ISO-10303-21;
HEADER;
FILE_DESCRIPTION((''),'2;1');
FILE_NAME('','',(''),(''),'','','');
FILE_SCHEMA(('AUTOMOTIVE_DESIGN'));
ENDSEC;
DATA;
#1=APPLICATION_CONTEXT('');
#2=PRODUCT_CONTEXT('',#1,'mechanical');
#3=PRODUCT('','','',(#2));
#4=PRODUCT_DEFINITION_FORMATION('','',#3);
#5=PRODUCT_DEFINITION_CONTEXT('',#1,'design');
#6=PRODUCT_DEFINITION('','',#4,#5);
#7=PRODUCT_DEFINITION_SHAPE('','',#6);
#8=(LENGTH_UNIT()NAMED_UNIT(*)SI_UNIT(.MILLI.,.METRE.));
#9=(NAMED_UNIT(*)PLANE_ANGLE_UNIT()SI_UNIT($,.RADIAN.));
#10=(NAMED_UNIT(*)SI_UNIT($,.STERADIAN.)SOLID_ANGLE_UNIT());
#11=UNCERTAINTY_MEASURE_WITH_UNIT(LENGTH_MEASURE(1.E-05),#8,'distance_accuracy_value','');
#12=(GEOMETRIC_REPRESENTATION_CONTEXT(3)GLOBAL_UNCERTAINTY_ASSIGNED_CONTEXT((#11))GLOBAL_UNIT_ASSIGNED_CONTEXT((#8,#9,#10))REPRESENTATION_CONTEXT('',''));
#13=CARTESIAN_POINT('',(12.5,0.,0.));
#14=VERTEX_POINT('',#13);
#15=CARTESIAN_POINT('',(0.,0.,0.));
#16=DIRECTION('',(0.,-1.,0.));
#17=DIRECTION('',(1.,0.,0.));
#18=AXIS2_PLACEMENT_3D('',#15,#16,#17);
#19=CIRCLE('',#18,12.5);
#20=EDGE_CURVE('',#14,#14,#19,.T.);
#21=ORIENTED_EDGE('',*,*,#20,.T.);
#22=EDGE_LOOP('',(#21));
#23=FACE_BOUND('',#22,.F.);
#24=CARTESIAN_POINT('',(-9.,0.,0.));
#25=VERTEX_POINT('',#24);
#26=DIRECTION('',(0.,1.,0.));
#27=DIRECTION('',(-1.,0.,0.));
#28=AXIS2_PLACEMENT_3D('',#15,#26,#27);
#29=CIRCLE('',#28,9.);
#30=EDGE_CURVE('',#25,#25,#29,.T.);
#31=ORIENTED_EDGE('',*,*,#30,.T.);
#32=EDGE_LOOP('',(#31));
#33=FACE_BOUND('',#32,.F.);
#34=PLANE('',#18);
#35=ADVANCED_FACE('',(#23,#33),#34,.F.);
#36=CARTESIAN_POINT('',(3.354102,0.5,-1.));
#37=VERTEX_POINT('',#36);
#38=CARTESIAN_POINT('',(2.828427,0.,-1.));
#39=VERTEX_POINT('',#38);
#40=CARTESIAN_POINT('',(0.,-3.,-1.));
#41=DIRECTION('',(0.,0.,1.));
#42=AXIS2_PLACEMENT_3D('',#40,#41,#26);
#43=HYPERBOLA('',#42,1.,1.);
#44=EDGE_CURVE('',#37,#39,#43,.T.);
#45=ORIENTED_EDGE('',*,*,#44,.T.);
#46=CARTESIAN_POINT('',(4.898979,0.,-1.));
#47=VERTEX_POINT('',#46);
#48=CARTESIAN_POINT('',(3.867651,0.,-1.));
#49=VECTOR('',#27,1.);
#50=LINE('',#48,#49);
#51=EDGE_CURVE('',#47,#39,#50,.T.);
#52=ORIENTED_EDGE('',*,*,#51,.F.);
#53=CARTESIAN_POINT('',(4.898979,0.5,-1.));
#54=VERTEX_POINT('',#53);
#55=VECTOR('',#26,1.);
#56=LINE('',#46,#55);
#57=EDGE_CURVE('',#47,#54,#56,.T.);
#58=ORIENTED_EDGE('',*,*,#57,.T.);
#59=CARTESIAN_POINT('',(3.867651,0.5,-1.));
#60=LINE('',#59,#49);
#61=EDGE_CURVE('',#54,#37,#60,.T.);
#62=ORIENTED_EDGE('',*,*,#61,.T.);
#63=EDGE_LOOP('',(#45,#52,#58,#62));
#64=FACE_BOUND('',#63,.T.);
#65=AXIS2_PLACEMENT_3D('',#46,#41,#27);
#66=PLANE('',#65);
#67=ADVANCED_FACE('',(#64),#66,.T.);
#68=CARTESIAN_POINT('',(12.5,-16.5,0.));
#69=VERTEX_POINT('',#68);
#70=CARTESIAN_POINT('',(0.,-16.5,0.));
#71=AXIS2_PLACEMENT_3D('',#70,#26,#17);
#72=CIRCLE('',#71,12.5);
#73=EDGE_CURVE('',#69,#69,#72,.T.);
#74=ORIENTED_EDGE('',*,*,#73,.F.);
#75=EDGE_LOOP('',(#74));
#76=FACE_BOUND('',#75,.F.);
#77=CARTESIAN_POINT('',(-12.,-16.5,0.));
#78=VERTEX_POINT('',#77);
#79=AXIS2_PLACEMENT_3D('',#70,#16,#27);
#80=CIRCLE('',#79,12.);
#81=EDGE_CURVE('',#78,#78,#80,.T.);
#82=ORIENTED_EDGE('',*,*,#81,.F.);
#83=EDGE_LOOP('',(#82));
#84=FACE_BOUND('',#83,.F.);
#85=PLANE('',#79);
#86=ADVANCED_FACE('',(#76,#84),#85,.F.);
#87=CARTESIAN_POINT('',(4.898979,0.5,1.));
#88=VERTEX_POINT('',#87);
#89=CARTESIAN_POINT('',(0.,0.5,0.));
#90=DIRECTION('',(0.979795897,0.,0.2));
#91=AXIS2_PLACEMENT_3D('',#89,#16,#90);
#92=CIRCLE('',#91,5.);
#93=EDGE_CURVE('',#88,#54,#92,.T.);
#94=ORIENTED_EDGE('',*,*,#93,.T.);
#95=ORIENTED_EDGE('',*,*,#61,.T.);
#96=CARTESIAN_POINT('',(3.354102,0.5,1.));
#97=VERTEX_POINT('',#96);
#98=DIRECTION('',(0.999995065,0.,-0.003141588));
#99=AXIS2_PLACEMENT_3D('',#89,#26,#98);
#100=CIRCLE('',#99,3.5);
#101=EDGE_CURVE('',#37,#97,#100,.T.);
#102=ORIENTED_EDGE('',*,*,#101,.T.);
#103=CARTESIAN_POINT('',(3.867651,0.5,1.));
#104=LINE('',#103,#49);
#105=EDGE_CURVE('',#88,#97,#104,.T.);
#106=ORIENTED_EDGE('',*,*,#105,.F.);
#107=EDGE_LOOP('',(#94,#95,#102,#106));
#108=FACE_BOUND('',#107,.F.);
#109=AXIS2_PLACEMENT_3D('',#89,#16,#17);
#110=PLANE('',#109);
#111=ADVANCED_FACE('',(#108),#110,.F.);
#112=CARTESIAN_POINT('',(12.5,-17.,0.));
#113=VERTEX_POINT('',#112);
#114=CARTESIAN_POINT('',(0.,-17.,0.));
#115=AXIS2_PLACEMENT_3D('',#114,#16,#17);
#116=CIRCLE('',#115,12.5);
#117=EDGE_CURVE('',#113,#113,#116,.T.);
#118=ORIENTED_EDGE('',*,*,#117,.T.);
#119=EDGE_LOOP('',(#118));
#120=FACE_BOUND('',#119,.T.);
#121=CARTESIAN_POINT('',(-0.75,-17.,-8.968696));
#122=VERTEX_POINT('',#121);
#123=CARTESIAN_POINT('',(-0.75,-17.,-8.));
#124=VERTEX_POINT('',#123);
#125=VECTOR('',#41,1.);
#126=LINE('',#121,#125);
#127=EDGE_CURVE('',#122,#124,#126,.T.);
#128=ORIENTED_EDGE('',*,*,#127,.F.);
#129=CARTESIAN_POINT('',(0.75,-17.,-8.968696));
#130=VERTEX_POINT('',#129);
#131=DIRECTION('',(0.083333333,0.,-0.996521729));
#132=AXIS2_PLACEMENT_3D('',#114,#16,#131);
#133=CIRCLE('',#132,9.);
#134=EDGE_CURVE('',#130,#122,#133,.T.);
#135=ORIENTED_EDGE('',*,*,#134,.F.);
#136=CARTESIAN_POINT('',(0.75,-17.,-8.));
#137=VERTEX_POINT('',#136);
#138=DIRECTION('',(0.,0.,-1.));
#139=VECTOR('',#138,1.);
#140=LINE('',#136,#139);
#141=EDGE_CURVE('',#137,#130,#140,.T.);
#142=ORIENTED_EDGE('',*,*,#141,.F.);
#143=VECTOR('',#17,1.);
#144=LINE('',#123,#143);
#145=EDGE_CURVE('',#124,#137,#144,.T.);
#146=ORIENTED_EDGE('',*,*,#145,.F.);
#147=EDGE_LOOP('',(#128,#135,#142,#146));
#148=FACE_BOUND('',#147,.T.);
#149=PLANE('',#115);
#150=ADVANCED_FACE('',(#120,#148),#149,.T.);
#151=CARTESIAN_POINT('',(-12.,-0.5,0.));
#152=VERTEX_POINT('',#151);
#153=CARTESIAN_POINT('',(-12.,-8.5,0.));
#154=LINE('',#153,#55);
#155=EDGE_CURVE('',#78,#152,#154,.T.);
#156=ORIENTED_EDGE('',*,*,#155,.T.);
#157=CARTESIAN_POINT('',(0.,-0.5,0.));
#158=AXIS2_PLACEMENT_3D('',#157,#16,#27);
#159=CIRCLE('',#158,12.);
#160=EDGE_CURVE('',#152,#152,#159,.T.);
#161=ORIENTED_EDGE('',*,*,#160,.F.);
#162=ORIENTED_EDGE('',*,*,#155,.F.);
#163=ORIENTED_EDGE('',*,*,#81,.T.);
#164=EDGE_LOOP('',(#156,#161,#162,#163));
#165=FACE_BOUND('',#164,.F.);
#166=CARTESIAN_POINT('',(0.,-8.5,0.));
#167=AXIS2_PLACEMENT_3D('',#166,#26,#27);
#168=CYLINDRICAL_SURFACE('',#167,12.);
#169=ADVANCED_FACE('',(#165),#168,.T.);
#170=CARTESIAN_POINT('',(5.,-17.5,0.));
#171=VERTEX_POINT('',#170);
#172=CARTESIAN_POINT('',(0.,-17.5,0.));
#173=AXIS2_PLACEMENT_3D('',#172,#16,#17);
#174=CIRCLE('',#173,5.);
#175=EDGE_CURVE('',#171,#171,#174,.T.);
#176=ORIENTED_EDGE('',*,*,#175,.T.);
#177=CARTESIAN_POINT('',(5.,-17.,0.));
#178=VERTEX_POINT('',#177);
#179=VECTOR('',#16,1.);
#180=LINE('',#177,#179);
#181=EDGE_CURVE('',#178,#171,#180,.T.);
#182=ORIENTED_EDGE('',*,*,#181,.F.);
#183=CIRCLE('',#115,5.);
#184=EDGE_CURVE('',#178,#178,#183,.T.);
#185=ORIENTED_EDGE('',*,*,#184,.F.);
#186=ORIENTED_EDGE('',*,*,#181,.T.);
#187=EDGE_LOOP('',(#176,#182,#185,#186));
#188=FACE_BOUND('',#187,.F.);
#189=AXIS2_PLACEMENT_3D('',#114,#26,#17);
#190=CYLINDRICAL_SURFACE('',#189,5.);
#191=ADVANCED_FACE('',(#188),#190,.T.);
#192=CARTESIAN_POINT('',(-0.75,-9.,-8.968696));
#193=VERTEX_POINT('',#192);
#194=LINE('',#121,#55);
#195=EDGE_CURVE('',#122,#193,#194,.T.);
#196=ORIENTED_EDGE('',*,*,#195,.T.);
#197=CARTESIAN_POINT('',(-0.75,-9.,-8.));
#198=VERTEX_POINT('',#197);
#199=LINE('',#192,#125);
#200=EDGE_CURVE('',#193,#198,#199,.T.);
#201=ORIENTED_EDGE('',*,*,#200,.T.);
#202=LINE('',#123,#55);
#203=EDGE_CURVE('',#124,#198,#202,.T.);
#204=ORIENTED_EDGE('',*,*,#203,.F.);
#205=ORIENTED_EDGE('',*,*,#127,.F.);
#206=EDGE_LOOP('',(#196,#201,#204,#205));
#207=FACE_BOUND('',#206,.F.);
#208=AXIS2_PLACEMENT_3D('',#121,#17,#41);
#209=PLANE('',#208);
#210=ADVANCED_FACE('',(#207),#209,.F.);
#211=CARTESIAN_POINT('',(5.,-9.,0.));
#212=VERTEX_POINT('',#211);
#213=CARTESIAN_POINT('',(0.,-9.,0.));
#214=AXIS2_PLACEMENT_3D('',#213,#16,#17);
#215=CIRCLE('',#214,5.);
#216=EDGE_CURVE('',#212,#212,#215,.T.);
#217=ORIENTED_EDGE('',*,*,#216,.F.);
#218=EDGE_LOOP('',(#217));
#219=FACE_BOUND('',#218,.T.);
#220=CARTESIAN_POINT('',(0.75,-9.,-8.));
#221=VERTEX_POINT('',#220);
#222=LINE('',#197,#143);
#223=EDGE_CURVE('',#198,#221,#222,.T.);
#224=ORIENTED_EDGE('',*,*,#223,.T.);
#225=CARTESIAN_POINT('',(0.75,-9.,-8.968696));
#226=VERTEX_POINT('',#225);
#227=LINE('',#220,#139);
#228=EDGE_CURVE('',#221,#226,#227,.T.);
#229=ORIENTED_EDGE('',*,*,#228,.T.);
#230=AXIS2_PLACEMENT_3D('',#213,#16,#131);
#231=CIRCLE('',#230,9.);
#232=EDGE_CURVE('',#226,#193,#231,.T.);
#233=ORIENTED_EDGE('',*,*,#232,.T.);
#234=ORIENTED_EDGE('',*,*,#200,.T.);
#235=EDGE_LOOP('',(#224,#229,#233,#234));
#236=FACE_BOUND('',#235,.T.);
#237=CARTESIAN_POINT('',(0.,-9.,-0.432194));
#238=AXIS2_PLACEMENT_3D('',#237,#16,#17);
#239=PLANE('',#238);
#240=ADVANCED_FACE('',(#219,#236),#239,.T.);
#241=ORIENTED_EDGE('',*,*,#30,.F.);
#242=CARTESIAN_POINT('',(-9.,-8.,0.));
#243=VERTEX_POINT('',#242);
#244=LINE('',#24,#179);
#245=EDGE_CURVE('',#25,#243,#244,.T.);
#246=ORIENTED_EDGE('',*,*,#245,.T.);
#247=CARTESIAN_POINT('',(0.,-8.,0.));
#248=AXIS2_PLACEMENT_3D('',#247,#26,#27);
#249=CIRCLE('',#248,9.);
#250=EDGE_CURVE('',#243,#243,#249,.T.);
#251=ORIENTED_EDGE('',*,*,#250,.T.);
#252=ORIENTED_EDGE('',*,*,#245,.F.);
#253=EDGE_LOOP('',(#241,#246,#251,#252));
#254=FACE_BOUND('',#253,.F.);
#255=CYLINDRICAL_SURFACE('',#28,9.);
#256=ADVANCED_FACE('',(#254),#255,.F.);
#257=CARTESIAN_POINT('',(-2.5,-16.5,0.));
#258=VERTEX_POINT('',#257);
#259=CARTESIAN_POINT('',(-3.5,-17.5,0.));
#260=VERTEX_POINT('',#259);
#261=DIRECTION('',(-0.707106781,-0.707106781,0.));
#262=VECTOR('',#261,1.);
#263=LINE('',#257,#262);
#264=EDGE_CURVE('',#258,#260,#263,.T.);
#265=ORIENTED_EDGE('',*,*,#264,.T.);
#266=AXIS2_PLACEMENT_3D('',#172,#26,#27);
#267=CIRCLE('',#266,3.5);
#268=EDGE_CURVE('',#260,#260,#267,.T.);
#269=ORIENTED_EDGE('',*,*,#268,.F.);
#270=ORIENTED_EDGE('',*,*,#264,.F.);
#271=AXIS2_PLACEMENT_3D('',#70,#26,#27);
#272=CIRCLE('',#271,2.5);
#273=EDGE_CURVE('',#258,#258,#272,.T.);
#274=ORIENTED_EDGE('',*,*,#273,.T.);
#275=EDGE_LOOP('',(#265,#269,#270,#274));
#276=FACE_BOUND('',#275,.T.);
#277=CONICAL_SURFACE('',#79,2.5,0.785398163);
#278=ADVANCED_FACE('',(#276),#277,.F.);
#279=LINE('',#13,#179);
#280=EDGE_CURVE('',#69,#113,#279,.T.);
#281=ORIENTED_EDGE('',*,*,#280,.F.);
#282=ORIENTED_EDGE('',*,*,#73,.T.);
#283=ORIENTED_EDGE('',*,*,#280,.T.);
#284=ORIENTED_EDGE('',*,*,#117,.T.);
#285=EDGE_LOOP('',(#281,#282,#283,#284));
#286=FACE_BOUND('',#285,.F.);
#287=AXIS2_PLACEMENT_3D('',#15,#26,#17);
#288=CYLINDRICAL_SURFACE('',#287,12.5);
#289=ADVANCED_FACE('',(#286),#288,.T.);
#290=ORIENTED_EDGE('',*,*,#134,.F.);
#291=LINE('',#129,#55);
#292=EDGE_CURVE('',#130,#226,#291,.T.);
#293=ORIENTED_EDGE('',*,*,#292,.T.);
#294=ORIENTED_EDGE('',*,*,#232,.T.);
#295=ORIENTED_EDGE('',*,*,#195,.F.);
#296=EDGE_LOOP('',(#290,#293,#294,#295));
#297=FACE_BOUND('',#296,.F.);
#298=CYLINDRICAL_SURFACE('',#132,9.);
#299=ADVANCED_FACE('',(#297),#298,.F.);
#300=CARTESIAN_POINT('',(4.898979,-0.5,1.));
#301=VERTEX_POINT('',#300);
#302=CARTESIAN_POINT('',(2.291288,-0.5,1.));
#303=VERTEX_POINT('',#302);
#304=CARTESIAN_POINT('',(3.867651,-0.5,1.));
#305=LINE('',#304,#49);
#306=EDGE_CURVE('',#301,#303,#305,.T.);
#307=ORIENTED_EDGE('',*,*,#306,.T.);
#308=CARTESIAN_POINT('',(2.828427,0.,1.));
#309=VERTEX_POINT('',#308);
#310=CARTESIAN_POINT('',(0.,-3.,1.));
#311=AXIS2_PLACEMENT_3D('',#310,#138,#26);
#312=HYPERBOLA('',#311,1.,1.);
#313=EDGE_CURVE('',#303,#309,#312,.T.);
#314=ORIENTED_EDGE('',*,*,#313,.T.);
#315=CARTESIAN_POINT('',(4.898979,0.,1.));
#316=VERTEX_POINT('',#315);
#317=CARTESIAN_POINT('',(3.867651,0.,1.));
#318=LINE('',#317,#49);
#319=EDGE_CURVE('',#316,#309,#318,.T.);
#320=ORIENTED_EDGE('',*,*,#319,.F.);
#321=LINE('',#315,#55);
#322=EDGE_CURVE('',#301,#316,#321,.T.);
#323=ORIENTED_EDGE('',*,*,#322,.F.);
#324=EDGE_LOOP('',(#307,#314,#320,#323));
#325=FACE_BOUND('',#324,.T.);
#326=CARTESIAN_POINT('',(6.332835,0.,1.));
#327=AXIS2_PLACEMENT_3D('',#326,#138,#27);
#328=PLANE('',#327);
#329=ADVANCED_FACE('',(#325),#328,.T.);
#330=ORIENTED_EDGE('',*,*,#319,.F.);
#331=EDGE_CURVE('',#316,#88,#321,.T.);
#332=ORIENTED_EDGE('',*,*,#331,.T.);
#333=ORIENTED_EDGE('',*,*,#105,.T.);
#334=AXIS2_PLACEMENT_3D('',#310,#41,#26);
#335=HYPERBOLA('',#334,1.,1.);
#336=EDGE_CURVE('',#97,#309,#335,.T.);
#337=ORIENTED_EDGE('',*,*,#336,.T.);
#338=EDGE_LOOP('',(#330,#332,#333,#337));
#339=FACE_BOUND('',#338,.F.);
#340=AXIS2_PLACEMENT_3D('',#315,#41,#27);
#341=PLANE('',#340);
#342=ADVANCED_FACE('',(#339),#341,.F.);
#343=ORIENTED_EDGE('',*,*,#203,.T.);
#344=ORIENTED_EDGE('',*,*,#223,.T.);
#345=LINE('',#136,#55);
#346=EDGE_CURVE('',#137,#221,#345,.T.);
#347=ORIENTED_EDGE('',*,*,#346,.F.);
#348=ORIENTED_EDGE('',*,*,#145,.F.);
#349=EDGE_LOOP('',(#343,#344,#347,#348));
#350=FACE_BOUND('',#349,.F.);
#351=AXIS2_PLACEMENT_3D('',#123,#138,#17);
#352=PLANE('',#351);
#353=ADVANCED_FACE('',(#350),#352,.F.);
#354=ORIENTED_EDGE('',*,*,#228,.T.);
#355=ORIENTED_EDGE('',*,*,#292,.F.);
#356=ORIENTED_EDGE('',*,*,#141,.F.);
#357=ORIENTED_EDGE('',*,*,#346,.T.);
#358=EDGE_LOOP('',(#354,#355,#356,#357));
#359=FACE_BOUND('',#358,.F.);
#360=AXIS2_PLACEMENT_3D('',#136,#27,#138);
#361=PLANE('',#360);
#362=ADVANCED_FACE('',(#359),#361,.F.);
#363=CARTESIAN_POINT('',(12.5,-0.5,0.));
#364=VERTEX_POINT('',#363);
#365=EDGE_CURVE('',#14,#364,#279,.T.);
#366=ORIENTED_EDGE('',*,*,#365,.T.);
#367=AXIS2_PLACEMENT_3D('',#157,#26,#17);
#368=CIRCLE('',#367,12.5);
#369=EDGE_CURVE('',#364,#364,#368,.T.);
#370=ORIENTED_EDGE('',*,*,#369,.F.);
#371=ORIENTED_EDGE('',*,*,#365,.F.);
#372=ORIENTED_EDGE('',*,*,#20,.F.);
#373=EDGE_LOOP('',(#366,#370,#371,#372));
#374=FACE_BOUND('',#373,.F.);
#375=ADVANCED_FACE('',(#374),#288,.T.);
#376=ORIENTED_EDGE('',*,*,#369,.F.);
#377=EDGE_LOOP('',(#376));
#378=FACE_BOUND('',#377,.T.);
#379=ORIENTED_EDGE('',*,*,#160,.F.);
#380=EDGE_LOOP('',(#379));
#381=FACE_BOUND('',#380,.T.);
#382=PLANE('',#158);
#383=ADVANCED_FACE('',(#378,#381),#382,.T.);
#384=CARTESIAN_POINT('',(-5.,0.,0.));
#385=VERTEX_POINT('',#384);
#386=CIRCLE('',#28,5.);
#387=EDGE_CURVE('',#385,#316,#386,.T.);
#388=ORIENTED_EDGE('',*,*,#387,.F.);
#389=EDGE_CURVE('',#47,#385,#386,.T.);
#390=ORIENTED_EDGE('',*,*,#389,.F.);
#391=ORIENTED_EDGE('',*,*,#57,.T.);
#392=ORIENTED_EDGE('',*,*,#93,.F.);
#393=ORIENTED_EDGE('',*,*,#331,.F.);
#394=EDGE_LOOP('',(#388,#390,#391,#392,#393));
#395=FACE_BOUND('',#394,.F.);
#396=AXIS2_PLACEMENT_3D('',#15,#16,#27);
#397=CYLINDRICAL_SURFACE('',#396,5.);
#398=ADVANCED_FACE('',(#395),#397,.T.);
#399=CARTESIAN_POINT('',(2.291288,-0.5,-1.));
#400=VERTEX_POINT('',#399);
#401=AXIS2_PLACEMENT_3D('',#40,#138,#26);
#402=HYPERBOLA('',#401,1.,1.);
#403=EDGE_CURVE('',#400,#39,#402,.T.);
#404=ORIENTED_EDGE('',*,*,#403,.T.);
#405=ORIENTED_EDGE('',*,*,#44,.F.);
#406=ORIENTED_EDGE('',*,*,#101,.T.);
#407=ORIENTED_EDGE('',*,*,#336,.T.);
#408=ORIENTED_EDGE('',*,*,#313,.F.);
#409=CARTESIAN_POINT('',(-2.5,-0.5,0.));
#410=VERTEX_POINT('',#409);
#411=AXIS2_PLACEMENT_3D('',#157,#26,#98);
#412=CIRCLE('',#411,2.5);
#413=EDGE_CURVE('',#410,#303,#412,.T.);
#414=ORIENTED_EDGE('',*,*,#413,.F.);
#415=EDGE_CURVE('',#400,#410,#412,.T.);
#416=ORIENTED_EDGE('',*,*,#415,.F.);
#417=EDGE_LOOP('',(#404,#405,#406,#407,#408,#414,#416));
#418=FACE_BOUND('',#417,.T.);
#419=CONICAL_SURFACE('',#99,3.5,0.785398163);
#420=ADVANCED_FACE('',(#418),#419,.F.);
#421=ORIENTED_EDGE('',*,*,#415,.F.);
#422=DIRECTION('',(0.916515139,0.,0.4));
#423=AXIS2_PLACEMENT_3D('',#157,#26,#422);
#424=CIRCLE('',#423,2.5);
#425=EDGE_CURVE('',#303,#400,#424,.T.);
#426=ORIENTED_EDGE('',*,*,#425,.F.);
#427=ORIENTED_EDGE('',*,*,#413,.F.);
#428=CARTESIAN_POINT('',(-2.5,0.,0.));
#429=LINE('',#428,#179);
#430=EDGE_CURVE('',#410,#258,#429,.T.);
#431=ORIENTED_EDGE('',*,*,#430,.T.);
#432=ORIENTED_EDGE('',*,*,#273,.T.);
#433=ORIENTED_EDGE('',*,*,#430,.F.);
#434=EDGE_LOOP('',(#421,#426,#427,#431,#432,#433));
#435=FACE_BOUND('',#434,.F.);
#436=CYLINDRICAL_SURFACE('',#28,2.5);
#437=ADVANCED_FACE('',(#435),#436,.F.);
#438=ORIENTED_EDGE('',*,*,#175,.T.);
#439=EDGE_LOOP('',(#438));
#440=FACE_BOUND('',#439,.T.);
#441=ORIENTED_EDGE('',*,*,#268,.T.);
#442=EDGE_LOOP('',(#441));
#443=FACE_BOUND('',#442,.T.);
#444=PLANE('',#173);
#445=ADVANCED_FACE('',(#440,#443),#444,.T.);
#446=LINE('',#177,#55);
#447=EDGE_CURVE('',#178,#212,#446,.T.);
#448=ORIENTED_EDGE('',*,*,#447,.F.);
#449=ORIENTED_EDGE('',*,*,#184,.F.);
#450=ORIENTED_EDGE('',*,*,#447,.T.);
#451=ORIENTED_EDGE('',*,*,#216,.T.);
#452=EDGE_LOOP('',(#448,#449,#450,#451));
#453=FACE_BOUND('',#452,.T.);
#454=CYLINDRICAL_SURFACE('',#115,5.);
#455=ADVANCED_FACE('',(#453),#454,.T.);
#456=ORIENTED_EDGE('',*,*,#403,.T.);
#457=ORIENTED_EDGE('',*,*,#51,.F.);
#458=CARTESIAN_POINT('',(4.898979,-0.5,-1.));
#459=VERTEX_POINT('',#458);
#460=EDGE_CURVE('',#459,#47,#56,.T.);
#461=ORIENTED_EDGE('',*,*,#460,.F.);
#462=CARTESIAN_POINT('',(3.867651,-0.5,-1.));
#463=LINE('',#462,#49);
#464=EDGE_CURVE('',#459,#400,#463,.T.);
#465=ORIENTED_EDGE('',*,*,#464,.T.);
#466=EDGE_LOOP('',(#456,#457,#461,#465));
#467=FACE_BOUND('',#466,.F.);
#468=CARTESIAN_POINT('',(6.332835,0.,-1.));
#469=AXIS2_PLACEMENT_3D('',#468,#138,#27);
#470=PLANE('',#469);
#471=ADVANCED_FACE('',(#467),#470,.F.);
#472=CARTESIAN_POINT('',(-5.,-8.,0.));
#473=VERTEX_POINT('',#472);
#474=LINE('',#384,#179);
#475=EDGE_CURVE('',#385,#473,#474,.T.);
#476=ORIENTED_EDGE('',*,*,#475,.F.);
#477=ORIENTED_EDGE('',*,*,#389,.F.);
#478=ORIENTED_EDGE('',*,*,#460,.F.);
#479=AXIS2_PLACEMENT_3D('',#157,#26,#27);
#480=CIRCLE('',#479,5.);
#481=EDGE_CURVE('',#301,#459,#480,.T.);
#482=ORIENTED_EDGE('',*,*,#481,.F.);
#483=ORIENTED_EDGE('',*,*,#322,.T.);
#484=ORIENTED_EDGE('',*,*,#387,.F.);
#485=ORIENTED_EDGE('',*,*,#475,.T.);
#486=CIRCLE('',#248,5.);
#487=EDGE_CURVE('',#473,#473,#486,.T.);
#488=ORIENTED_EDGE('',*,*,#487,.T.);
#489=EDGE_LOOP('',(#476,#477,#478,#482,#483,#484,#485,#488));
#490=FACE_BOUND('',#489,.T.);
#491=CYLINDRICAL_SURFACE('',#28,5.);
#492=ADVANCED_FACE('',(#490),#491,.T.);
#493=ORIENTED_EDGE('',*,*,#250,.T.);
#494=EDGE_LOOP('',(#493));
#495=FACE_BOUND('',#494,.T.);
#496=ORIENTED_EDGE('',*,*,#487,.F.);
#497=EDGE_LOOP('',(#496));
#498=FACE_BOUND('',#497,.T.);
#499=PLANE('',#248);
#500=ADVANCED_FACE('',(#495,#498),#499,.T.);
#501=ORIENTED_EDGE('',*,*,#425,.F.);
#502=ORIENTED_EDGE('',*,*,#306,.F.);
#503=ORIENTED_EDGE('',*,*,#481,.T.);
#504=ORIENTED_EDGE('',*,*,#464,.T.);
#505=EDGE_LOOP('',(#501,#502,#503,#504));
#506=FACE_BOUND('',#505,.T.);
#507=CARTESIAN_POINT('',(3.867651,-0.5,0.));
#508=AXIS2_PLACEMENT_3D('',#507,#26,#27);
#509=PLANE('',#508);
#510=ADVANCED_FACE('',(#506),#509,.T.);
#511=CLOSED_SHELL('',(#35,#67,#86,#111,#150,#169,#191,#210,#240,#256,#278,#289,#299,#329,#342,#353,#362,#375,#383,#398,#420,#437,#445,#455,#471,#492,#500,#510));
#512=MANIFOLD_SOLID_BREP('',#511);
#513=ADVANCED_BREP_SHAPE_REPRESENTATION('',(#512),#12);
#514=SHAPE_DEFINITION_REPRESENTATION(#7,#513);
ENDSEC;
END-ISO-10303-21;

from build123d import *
from build123d import SkipClean  # not in build123d's __all__

# Parameters (mm, degrees)
F0_R         = 12.5
F1_DEPTH     = 17
F2_W         = 1.5
F2_H         = 16
F4_R         = 2.5
F5_DEPTH     = 17.001
F6_R         = 9
F6_R_2       = 5
F7_DEPTH     = 8
F8_W         = 4.9303688211
F8_H         = 2
F9_DEPTH     = 0.5
F10_R        = 5
F11_DEPTH    = 8
F12_DEPTH    = 0.5
F13_DEPTH    = 0.5
F14_T4_ANGLE = 359.64


# Not quite as in the source:
# - a fillet or chamfer that OpenCascade refuses, or shapes differently, is made with other operations: its cross-section is extruded or revolved along the edge and cut away or added
# - after a boolean that leaves OpenCascade's solid faulty, fix() repairs it


with BuildPart() as f1:
    # F0 (on Front) → F1 (new body)
    with BuildSketch(Plane.XZ):
        Circle(F0_R)
    extrude(amount=F1_DEPTH)

    # F2 (on Top) → F3 (revolve, cut)
    with BuildSketch(Plane.XY):
        with Locations((-12.75, -8.5)):
            Rectangle(F2_W, F2_H)
    revolve(axis=Axis((0, -8.2131072704, 0), (0, -1, 0)), mode=Mode.SUBTRACT)

    # F4 (on face) → F5 (cut, through all)
    with BuildSketch(Plane(origin=(0, 0, 0), x_dir=(-1, 0, 0), z_dir=(0, 1, 0))):
        Circle(F4_R)
    extrude(amount=-F5_DEPTH, mode=Mode.SUBTRACT)

    # F6 (on face) → F7 (cut)
    with BuildSketch(Plane(origin=(0, 0, 0), x_dir=(-1, 0, 0), z_dir=(0, 1, 0))):
        Circle(F6_R)
        Circle(F6_R_2, mode=Mode.SUBTRACT)
    extrude(amount=-F7_DEPTH, mode=Mode.SUBTRACT)

    # F8 (on face) → F9 (cut)
    with BuildSketch(Plane(origin=(0, 0, 0), x_dir=(-1, 0, 0), z_dir=(0, 1, 0))):
        with Locations((-3.8676508702, 0)):
            Rectangle(F8_W, F8_H)
    extrude(amount=-F9_DEPTH, mode=Mode.SUBTRACT)

    # F10 (on face) → F11 (cut)
    with BuildSketch(Plane.XZ.offset(17)):
        with BuildLine():
            Line((0.75, -8), (0.75, -8.9686955573))
            ThreePointArc((0.75, -8.9686955573), (0, 9), (-0.75, -8.9686955573))
            Line((-0.75, -8.9686955573), (-0.75, -8))
            Line((-0.75, -8), (0.75, -8))
        make_face()
        Circle(F10_R, mode=Mode.SUBTRACT)
    extrude(amount=-F11_DEPTH, mode=Mode.SUBTRACT)

    # F12 (add): a face of the model
    f12_faces = [f1.faces().sort_by_distance(p)[0] for p in [
        (-0.4884023099, 0, 4.8346844466),
    ]]
    with SkipClean():  # cleaning this boolean's faces spoils the solid; the shape is the same uncleaned
        extrude(f12_faces, amount=F12_DEPTH)

    # F13 (add): a face of the model
    f13_faces = [f1.faces().sort_by_distance(p)[0] for p in [
        (-4.8585786438, -17, 0),
    ]]
    extrude(f13_faces, amount=F13_DEPTH)

    add(f1.part.fix(), mode=Mode.REPLACE)

    # F14: chamfer of 1 on 2 edges, made by hand

    # F14_s1 → F14_t2 (revolve, cut)
    with BuildSketch(Plane.XY):
        Polygon((-2.5, -16.5), (-3.5, -17.5), (-2.5, -17.5), align=None)
    revolve(axis=Axis((0, -17.5, 0), (0, 1, 0)), mode=Mode.SUBTRACT)

    # F14_s3 → F14_t4 (revolve, cut)
    with BuildSketch(Plane(origin=(0, 0, 0), x_dir=(0, 1, 0), z_dir=(0.0031415875, 0, 0.9999950652))):
        Polygon((0.5, -3.5), (-0.5, -2.5), (0.5, -2.5), align=None)
    revolve(axis=Axis((0, 0.5, 0), (0, 1, 0)), revolution_arc=F14_T4_ANGLE, mode=Mode.SUBTRACT)


solid = f1.part
